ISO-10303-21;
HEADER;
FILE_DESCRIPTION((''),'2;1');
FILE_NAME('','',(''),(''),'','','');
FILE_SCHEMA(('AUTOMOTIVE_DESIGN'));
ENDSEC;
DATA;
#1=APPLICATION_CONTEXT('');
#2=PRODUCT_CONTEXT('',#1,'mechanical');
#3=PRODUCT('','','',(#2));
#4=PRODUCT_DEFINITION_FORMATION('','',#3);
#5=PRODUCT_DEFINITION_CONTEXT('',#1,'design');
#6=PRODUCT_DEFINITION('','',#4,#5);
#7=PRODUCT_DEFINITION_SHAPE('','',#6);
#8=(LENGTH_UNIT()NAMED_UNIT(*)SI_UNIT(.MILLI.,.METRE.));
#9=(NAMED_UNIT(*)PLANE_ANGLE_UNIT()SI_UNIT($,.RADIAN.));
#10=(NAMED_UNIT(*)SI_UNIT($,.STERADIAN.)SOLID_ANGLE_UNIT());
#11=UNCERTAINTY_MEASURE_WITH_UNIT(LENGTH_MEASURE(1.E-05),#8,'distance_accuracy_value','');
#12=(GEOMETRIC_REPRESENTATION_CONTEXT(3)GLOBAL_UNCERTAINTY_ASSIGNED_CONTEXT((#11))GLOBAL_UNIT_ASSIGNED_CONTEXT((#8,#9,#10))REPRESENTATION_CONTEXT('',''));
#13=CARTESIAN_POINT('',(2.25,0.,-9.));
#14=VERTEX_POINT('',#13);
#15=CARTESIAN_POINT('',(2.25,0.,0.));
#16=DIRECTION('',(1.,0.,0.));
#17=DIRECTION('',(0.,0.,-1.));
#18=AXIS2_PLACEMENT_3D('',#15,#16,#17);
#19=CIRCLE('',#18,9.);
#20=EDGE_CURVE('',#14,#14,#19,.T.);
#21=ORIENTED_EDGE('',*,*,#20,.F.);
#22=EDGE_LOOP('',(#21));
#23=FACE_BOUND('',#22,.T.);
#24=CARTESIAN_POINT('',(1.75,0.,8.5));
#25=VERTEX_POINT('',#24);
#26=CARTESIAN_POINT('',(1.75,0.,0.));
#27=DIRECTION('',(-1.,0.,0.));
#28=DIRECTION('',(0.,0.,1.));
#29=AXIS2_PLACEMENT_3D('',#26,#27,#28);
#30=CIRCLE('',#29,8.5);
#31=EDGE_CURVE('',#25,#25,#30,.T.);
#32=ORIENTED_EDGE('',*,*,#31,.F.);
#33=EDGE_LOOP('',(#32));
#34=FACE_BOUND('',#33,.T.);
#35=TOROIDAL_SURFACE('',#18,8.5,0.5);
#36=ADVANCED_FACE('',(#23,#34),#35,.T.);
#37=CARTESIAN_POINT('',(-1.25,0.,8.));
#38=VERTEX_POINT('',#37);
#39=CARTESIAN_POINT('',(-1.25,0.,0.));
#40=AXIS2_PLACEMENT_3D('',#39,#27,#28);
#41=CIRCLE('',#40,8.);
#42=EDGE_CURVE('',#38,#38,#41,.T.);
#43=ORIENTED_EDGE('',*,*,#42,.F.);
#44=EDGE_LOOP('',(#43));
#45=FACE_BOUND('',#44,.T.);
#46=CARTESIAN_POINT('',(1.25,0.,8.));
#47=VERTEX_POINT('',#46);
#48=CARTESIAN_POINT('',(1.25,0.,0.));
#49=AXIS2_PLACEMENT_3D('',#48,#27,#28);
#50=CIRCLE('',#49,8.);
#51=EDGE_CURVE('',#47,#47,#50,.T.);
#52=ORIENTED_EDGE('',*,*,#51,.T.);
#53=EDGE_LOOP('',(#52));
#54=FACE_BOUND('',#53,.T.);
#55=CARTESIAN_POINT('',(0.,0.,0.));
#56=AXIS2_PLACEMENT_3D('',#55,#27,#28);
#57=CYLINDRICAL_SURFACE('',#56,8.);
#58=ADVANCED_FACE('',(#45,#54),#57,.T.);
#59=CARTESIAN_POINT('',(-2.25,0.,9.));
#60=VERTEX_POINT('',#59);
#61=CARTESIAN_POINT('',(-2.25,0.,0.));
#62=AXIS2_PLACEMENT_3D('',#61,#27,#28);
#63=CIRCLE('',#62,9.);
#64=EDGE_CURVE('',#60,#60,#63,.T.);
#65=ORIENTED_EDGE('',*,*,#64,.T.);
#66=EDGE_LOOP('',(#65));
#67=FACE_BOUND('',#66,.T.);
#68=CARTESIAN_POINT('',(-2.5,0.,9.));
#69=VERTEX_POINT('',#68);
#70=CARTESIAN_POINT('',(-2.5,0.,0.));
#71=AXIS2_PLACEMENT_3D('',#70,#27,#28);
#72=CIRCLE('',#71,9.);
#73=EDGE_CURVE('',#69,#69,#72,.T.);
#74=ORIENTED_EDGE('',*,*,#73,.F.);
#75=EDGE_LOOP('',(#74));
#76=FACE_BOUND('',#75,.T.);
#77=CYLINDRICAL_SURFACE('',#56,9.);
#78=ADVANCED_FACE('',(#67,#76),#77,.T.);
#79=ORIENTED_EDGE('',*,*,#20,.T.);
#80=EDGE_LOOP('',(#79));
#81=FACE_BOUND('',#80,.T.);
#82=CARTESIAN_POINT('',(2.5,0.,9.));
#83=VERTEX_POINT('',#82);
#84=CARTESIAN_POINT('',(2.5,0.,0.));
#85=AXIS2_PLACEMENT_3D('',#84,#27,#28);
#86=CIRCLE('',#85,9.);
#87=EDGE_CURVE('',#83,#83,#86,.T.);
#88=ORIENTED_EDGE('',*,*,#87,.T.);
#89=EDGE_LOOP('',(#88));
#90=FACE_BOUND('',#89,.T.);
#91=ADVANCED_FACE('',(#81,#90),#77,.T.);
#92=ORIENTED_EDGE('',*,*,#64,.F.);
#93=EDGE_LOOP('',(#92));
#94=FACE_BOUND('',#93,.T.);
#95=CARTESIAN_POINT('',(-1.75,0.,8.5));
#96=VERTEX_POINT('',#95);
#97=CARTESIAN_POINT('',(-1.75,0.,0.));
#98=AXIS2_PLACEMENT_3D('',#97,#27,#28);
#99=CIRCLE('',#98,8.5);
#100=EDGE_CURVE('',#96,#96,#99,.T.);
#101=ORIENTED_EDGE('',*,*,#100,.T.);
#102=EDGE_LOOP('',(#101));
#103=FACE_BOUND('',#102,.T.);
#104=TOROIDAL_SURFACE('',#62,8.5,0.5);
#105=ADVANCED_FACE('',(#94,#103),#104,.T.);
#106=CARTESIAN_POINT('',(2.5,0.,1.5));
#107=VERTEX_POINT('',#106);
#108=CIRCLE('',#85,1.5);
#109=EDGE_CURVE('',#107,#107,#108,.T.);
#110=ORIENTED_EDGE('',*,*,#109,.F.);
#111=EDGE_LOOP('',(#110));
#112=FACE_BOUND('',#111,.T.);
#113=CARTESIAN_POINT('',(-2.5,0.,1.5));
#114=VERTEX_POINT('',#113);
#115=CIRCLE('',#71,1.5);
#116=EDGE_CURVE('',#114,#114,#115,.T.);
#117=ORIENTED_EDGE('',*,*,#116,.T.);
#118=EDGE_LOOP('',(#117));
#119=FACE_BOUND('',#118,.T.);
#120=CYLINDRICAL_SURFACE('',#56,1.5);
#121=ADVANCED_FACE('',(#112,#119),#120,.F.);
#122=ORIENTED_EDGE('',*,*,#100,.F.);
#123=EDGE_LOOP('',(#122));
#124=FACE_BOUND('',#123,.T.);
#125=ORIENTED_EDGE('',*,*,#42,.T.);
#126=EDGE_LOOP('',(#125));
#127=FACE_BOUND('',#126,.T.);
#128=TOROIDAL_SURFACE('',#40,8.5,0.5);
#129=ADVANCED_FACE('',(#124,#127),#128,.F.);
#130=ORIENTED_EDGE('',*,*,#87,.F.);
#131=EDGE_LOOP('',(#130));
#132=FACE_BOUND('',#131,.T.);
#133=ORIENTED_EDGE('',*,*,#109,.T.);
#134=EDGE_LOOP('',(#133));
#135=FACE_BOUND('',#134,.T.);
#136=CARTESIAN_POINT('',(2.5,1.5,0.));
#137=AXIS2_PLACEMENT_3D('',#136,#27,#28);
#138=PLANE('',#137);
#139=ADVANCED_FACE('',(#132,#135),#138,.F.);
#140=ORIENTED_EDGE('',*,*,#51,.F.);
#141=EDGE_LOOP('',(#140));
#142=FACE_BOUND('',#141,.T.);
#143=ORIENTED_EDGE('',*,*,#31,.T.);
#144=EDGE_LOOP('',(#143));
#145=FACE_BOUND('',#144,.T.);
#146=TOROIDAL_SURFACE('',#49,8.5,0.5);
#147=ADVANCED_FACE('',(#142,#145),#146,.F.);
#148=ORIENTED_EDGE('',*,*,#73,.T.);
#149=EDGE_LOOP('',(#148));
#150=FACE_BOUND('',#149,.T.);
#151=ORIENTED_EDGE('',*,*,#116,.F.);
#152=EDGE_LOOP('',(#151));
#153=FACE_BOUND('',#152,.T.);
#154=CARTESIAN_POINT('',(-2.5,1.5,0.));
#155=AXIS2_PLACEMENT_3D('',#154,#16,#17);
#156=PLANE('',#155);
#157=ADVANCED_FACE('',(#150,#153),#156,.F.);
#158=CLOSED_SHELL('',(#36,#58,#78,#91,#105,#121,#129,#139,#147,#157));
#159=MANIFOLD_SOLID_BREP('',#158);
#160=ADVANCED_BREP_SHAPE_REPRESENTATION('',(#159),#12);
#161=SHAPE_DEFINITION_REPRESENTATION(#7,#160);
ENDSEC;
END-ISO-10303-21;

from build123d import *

# Parameters (mm, degrees)
FILLET1_R = 0.5


with BuildPart() as part:
    # Sketch1 → Revolve1 (revolve)
    with BuildSketch(Plane.XY, mode=Mode.PRIVATE) as revolve1_sk:
        with BuildLine():
            Line((-2.5, 1.5), (2.5, 1.5))
            Line((2.5, 1.5), (2.5, 9))
            Line((2.5, 9), (1.75, 9))
            Line((1.75, 9), (1.75, 8.5))
            ThreePointArc((1.75, 8.5), (1.603553391, 8.146446609), (1.25, 8))
            Line((1.25, 8), (-1.25, 8))
            ThreePointArc((-1.25, 8), (-1.603553391, 8.146446609), (-1.75, 8.5))
            Line((-1.75, 8.5), (-1.75, 9))
            Line((-1.75, 9), (-2.5, 9))
            Line((-2.5, 9), (-2.5, 1.5))
        make_face()
    revolve(revolve1_sk.sketch.rotate(Axis((0, 0, 0), (1, 0, 0)), 90), axis=Axis((0, 0, 0), (1, 0, 0)))

    # Fillet1
    fillet1_edges = [part.edges().sort_by_distance(p)[0] for p in [
        (1.75, 0, -9),
        (-1.75, 0, -9),
    ]]
    fillet(fillet1_edges, radius=FILLET1_R - 0.0001)  # a hair under: the kernel refuses the full size


solid = part.part
